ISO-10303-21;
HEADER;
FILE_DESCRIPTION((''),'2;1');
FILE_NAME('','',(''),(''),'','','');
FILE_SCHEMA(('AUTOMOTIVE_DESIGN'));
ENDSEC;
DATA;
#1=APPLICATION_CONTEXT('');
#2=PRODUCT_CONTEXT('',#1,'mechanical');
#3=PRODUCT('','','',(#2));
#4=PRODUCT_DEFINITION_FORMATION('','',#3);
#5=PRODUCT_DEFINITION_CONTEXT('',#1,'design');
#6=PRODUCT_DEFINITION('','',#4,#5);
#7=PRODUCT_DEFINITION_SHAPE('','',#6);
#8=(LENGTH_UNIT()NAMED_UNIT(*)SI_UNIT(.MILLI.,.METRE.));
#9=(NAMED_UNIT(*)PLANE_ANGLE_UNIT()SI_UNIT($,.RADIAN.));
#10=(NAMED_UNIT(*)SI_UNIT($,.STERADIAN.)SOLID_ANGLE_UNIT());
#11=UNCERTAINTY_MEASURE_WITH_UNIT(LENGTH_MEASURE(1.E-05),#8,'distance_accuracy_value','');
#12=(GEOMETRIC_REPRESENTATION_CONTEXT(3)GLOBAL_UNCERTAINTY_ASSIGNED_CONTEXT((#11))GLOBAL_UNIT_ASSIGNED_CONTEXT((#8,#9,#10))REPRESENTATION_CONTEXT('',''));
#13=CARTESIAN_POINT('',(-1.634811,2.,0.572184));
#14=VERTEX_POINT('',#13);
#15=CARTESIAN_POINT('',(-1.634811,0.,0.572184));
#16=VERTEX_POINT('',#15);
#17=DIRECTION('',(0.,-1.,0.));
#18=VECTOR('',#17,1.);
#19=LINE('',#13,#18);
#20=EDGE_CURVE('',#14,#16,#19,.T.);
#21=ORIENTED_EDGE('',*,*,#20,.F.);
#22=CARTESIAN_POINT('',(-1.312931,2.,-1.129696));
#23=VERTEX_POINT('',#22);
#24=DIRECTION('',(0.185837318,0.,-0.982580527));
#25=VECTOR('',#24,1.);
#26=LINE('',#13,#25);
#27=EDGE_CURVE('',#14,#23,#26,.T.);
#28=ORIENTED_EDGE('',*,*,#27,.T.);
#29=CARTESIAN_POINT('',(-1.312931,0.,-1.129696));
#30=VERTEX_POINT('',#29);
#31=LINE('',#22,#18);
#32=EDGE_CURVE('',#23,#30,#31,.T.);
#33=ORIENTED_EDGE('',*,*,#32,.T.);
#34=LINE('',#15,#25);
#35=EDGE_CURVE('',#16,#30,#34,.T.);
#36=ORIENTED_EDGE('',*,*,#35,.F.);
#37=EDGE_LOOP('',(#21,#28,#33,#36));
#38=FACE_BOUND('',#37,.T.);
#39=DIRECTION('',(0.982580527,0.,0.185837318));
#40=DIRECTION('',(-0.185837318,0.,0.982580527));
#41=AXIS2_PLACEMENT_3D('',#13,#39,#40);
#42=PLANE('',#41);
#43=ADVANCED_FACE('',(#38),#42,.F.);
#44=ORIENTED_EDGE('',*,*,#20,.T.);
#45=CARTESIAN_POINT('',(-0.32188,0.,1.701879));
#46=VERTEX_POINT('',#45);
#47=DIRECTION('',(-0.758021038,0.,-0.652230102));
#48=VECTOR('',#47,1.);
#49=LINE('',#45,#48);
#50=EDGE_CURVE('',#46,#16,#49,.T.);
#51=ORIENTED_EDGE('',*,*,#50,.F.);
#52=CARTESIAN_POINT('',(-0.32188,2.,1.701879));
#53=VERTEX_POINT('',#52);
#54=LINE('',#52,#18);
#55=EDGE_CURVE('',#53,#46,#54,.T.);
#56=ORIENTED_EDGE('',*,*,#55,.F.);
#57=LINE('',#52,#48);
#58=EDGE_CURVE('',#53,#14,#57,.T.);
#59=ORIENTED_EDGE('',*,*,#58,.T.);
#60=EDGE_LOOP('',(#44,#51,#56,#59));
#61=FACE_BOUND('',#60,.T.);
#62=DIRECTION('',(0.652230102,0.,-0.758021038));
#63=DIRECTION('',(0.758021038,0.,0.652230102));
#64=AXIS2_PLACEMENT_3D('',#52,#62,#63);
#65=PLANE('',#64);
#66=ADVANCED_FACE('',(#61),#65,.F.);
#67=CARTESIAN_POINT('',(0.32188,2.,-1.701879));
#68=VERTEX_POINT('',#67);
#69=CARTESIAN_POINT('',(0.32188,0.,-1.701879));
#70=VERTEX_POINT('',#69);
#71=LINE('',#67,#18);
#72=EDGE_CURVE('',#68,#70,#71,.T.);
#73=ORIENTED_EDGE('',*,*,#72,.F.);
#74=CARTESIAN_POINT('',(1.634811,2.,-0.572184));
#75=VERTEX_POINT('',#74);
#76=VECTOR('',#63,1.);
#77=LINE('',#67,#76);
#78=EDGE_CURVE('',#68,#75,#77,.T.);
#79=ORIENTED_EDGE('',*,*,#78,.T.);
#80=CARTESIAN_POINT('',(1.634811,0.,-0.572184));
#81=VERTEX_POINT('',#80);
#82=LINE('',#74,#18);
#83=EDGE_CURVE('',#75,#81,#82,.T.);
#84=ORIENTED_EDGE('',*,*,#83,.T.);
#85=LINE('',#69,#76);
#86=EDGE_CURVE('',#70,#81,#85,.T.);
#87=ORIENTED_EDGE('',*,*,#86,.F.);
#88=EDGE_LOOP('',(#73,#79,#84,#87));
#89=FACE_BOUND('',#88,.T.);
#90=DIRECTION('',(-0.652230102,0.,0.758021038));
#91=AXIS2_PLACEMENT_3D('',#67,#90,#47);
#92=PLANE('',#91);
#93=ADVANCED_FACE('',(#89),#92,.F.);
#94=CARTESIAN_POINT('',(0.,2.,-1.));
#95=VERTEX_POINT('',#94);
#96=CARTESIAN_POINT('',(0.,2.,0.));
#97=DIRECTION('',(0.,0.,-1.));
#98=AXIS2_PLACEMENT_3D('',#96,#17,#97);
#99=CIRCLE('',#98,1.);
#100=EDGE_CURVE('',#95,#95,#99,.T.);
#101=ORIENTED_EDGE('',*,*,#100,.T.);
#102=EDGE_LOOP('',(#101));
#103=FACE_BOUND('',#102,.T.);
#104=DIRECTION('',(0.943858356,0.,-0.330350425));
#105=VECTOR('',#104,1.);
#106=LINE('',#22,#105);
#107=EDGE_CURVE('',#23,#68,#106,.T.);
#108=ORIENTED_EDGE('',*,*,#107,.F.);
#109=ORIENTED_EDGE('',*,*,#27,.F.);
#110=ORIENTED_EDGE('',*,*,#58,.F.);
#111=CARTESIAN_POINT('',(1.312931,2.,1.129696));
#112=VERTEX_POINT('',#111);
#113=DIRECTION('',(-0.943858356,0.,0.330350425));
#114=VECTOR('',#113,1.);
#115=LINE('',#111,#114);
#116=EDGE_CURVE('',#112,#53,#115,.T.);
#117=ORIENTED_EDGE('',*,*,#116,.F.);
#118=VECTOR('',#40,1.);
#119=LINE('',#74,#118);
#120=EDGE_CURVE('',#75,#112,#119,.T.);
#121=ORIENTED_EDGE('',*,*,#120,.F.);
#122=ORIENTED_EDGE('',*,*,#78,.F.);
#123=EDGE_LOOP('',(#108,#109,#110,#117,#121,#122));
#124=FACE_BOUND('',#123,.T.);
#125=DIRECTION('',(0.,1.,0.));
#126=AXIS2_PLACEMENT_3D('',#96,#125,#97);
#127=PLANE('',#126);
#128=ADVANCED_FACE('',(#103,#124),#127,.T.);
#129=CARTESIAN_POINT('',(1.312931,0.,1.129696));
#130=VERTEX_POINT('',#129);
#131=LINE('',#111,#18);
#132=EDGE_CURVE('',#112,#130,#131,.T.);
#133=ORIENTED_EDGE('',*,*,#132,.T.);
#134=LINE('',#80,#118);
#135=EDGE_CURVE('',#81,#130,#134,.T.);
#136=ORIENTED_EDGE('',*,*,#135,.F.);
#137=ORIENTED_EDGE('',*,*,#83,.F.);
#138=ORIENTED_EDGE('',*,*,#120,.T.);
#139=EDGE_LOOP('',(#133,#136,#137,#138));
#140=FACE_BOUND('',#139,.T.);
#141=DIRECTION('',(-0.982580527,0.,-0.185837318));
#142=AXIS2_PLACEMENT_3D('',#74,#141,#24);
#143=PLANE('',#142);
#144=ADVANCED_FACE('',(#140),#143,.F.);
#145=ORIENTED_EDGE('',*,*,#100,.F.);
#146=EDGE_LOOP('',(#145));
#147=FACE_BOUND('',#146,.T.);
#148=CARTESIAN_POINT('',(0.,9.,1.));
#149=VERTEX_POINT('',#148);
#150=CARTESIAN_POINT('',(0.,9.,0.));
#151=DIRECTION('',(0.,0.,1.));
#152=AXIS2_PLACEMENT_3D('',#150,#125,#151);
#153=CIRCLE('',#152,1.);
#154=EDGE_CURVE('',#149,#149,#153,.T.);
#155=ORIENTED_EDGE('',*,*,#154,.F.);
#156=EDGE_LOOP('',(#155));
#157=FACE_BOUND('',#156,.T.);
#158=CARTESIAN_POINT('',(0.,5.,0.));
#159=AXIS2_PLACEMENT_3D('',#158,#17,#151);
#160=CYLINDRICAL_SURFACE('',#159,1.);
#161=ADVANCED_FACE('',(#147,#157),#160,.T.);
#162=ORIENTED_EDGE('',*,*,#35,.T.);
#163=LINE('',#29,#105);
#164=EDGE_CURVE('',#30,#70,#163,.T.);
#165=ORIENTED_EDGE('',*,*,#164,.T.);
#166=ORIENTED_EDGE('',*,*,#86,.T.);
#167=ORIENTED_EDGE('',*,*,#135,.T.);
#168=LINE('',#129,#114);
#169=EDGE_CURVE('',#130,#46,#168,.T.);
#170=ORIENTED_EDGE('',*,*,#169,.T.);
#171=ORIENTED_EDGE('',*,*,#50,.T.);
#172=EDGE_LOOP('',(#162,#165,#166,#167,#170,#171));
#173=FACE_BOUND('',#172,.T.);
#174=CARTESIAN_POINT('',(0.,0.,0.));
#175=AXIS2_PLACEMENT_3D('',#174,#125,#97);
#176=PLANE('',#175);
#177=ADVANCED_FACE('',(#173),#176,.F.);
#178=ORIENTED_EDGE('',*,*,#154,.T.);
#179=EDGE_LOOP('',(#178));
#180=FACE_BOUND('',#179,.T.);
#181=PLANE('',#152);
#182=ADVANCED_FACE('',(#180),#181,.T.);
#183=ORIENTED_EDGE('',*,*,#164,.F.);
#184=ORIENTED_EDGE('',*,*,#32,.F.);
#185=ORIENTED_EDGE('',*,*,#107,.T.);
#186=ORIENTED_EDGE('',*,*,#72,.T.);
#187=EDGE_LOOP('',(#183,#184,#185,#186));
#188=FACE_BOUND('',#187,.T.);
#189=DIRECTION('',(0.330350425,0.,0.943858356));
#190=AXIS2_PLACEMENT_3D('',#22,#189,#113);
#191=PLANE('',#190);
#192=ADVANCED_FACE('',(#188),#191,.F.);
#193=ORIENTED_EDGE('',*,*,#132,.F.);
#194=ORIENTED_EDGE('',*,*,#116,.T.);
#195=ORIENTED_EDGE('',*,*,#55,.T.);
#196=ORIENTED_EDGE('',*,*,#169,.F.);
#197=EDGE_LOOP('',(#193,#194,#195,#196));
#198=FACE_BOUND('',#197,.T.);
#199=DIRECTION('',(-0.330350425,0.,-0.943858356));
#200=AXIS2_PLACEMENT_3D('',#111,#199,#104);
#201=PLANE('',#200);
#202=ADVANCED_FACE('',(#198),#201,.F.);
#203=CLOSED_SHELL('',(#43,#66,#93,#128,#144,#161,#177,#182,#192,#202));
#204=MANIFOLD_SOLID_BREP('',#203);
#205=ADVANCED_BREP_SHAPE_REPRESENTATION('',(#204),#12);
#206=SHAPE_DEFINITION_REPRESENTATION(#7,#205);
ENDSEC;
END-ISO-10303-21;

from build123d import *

# Parameters (mm, degrees)
OTHER_M2_OUTLINE_R   = 1
OTHER_M2_DEPTH       = 5
OTHER_M2_2_OUTLINE_R = 1
OTHER_M2_2_DEPTH     = 2
SKETCH_2_R           = 1
EXTRUDE_1_DEPTH      = 4


# Read off the part's stored shape, not the designer's step: M2螺栓镜向
with BuildPart() as part:
    # Other M2 outline → Other M2 (new body)
    with BuildSketch(Plane(origin=(0, 0, 0), x_dir=(1, 0, 0), z_dir=(0, 1, 0))):
        Circle(OTHER_M2_OUTLINE_R)
    extrude(amount=OTHER_M2_DEPTH)

    # Other M2 2 outline → Other M2 2 (add)
    with BuildSketch(Plane(origin=(0, 0, 0), x_dir=(1, 0, 0), z_dir=(0, 1, 0))):
        Polygon((1.634810628, 0.57218372), (0.321879677, 1.701879395), (-1.312930951, 1.129695675), (-1.634810628, -0.57218372), (-0.321879677, -1.701879395), (1.312930951, -1.129695675), align=None)
        Circle(OTHER_M2_2_OUTLINE_R, mode=Mode.SUBTRACT)
    extrude(amount=OTHER_M2_2_DEPTH)

    # 草图2 → 凸台-拉伸1 (add)
    with BuildSketch(Plane(origin=(0, 5, 0), x_dir=(1, 0, 0), z_dir=(0, 1, 0))):
        with Locations(Location((0, 0, 0), (0, 0, 270))):
            Circle(SKETCH_2_R)
    extrude(amount=EXTRUDE_1_DEPTH)


solid = part.part
